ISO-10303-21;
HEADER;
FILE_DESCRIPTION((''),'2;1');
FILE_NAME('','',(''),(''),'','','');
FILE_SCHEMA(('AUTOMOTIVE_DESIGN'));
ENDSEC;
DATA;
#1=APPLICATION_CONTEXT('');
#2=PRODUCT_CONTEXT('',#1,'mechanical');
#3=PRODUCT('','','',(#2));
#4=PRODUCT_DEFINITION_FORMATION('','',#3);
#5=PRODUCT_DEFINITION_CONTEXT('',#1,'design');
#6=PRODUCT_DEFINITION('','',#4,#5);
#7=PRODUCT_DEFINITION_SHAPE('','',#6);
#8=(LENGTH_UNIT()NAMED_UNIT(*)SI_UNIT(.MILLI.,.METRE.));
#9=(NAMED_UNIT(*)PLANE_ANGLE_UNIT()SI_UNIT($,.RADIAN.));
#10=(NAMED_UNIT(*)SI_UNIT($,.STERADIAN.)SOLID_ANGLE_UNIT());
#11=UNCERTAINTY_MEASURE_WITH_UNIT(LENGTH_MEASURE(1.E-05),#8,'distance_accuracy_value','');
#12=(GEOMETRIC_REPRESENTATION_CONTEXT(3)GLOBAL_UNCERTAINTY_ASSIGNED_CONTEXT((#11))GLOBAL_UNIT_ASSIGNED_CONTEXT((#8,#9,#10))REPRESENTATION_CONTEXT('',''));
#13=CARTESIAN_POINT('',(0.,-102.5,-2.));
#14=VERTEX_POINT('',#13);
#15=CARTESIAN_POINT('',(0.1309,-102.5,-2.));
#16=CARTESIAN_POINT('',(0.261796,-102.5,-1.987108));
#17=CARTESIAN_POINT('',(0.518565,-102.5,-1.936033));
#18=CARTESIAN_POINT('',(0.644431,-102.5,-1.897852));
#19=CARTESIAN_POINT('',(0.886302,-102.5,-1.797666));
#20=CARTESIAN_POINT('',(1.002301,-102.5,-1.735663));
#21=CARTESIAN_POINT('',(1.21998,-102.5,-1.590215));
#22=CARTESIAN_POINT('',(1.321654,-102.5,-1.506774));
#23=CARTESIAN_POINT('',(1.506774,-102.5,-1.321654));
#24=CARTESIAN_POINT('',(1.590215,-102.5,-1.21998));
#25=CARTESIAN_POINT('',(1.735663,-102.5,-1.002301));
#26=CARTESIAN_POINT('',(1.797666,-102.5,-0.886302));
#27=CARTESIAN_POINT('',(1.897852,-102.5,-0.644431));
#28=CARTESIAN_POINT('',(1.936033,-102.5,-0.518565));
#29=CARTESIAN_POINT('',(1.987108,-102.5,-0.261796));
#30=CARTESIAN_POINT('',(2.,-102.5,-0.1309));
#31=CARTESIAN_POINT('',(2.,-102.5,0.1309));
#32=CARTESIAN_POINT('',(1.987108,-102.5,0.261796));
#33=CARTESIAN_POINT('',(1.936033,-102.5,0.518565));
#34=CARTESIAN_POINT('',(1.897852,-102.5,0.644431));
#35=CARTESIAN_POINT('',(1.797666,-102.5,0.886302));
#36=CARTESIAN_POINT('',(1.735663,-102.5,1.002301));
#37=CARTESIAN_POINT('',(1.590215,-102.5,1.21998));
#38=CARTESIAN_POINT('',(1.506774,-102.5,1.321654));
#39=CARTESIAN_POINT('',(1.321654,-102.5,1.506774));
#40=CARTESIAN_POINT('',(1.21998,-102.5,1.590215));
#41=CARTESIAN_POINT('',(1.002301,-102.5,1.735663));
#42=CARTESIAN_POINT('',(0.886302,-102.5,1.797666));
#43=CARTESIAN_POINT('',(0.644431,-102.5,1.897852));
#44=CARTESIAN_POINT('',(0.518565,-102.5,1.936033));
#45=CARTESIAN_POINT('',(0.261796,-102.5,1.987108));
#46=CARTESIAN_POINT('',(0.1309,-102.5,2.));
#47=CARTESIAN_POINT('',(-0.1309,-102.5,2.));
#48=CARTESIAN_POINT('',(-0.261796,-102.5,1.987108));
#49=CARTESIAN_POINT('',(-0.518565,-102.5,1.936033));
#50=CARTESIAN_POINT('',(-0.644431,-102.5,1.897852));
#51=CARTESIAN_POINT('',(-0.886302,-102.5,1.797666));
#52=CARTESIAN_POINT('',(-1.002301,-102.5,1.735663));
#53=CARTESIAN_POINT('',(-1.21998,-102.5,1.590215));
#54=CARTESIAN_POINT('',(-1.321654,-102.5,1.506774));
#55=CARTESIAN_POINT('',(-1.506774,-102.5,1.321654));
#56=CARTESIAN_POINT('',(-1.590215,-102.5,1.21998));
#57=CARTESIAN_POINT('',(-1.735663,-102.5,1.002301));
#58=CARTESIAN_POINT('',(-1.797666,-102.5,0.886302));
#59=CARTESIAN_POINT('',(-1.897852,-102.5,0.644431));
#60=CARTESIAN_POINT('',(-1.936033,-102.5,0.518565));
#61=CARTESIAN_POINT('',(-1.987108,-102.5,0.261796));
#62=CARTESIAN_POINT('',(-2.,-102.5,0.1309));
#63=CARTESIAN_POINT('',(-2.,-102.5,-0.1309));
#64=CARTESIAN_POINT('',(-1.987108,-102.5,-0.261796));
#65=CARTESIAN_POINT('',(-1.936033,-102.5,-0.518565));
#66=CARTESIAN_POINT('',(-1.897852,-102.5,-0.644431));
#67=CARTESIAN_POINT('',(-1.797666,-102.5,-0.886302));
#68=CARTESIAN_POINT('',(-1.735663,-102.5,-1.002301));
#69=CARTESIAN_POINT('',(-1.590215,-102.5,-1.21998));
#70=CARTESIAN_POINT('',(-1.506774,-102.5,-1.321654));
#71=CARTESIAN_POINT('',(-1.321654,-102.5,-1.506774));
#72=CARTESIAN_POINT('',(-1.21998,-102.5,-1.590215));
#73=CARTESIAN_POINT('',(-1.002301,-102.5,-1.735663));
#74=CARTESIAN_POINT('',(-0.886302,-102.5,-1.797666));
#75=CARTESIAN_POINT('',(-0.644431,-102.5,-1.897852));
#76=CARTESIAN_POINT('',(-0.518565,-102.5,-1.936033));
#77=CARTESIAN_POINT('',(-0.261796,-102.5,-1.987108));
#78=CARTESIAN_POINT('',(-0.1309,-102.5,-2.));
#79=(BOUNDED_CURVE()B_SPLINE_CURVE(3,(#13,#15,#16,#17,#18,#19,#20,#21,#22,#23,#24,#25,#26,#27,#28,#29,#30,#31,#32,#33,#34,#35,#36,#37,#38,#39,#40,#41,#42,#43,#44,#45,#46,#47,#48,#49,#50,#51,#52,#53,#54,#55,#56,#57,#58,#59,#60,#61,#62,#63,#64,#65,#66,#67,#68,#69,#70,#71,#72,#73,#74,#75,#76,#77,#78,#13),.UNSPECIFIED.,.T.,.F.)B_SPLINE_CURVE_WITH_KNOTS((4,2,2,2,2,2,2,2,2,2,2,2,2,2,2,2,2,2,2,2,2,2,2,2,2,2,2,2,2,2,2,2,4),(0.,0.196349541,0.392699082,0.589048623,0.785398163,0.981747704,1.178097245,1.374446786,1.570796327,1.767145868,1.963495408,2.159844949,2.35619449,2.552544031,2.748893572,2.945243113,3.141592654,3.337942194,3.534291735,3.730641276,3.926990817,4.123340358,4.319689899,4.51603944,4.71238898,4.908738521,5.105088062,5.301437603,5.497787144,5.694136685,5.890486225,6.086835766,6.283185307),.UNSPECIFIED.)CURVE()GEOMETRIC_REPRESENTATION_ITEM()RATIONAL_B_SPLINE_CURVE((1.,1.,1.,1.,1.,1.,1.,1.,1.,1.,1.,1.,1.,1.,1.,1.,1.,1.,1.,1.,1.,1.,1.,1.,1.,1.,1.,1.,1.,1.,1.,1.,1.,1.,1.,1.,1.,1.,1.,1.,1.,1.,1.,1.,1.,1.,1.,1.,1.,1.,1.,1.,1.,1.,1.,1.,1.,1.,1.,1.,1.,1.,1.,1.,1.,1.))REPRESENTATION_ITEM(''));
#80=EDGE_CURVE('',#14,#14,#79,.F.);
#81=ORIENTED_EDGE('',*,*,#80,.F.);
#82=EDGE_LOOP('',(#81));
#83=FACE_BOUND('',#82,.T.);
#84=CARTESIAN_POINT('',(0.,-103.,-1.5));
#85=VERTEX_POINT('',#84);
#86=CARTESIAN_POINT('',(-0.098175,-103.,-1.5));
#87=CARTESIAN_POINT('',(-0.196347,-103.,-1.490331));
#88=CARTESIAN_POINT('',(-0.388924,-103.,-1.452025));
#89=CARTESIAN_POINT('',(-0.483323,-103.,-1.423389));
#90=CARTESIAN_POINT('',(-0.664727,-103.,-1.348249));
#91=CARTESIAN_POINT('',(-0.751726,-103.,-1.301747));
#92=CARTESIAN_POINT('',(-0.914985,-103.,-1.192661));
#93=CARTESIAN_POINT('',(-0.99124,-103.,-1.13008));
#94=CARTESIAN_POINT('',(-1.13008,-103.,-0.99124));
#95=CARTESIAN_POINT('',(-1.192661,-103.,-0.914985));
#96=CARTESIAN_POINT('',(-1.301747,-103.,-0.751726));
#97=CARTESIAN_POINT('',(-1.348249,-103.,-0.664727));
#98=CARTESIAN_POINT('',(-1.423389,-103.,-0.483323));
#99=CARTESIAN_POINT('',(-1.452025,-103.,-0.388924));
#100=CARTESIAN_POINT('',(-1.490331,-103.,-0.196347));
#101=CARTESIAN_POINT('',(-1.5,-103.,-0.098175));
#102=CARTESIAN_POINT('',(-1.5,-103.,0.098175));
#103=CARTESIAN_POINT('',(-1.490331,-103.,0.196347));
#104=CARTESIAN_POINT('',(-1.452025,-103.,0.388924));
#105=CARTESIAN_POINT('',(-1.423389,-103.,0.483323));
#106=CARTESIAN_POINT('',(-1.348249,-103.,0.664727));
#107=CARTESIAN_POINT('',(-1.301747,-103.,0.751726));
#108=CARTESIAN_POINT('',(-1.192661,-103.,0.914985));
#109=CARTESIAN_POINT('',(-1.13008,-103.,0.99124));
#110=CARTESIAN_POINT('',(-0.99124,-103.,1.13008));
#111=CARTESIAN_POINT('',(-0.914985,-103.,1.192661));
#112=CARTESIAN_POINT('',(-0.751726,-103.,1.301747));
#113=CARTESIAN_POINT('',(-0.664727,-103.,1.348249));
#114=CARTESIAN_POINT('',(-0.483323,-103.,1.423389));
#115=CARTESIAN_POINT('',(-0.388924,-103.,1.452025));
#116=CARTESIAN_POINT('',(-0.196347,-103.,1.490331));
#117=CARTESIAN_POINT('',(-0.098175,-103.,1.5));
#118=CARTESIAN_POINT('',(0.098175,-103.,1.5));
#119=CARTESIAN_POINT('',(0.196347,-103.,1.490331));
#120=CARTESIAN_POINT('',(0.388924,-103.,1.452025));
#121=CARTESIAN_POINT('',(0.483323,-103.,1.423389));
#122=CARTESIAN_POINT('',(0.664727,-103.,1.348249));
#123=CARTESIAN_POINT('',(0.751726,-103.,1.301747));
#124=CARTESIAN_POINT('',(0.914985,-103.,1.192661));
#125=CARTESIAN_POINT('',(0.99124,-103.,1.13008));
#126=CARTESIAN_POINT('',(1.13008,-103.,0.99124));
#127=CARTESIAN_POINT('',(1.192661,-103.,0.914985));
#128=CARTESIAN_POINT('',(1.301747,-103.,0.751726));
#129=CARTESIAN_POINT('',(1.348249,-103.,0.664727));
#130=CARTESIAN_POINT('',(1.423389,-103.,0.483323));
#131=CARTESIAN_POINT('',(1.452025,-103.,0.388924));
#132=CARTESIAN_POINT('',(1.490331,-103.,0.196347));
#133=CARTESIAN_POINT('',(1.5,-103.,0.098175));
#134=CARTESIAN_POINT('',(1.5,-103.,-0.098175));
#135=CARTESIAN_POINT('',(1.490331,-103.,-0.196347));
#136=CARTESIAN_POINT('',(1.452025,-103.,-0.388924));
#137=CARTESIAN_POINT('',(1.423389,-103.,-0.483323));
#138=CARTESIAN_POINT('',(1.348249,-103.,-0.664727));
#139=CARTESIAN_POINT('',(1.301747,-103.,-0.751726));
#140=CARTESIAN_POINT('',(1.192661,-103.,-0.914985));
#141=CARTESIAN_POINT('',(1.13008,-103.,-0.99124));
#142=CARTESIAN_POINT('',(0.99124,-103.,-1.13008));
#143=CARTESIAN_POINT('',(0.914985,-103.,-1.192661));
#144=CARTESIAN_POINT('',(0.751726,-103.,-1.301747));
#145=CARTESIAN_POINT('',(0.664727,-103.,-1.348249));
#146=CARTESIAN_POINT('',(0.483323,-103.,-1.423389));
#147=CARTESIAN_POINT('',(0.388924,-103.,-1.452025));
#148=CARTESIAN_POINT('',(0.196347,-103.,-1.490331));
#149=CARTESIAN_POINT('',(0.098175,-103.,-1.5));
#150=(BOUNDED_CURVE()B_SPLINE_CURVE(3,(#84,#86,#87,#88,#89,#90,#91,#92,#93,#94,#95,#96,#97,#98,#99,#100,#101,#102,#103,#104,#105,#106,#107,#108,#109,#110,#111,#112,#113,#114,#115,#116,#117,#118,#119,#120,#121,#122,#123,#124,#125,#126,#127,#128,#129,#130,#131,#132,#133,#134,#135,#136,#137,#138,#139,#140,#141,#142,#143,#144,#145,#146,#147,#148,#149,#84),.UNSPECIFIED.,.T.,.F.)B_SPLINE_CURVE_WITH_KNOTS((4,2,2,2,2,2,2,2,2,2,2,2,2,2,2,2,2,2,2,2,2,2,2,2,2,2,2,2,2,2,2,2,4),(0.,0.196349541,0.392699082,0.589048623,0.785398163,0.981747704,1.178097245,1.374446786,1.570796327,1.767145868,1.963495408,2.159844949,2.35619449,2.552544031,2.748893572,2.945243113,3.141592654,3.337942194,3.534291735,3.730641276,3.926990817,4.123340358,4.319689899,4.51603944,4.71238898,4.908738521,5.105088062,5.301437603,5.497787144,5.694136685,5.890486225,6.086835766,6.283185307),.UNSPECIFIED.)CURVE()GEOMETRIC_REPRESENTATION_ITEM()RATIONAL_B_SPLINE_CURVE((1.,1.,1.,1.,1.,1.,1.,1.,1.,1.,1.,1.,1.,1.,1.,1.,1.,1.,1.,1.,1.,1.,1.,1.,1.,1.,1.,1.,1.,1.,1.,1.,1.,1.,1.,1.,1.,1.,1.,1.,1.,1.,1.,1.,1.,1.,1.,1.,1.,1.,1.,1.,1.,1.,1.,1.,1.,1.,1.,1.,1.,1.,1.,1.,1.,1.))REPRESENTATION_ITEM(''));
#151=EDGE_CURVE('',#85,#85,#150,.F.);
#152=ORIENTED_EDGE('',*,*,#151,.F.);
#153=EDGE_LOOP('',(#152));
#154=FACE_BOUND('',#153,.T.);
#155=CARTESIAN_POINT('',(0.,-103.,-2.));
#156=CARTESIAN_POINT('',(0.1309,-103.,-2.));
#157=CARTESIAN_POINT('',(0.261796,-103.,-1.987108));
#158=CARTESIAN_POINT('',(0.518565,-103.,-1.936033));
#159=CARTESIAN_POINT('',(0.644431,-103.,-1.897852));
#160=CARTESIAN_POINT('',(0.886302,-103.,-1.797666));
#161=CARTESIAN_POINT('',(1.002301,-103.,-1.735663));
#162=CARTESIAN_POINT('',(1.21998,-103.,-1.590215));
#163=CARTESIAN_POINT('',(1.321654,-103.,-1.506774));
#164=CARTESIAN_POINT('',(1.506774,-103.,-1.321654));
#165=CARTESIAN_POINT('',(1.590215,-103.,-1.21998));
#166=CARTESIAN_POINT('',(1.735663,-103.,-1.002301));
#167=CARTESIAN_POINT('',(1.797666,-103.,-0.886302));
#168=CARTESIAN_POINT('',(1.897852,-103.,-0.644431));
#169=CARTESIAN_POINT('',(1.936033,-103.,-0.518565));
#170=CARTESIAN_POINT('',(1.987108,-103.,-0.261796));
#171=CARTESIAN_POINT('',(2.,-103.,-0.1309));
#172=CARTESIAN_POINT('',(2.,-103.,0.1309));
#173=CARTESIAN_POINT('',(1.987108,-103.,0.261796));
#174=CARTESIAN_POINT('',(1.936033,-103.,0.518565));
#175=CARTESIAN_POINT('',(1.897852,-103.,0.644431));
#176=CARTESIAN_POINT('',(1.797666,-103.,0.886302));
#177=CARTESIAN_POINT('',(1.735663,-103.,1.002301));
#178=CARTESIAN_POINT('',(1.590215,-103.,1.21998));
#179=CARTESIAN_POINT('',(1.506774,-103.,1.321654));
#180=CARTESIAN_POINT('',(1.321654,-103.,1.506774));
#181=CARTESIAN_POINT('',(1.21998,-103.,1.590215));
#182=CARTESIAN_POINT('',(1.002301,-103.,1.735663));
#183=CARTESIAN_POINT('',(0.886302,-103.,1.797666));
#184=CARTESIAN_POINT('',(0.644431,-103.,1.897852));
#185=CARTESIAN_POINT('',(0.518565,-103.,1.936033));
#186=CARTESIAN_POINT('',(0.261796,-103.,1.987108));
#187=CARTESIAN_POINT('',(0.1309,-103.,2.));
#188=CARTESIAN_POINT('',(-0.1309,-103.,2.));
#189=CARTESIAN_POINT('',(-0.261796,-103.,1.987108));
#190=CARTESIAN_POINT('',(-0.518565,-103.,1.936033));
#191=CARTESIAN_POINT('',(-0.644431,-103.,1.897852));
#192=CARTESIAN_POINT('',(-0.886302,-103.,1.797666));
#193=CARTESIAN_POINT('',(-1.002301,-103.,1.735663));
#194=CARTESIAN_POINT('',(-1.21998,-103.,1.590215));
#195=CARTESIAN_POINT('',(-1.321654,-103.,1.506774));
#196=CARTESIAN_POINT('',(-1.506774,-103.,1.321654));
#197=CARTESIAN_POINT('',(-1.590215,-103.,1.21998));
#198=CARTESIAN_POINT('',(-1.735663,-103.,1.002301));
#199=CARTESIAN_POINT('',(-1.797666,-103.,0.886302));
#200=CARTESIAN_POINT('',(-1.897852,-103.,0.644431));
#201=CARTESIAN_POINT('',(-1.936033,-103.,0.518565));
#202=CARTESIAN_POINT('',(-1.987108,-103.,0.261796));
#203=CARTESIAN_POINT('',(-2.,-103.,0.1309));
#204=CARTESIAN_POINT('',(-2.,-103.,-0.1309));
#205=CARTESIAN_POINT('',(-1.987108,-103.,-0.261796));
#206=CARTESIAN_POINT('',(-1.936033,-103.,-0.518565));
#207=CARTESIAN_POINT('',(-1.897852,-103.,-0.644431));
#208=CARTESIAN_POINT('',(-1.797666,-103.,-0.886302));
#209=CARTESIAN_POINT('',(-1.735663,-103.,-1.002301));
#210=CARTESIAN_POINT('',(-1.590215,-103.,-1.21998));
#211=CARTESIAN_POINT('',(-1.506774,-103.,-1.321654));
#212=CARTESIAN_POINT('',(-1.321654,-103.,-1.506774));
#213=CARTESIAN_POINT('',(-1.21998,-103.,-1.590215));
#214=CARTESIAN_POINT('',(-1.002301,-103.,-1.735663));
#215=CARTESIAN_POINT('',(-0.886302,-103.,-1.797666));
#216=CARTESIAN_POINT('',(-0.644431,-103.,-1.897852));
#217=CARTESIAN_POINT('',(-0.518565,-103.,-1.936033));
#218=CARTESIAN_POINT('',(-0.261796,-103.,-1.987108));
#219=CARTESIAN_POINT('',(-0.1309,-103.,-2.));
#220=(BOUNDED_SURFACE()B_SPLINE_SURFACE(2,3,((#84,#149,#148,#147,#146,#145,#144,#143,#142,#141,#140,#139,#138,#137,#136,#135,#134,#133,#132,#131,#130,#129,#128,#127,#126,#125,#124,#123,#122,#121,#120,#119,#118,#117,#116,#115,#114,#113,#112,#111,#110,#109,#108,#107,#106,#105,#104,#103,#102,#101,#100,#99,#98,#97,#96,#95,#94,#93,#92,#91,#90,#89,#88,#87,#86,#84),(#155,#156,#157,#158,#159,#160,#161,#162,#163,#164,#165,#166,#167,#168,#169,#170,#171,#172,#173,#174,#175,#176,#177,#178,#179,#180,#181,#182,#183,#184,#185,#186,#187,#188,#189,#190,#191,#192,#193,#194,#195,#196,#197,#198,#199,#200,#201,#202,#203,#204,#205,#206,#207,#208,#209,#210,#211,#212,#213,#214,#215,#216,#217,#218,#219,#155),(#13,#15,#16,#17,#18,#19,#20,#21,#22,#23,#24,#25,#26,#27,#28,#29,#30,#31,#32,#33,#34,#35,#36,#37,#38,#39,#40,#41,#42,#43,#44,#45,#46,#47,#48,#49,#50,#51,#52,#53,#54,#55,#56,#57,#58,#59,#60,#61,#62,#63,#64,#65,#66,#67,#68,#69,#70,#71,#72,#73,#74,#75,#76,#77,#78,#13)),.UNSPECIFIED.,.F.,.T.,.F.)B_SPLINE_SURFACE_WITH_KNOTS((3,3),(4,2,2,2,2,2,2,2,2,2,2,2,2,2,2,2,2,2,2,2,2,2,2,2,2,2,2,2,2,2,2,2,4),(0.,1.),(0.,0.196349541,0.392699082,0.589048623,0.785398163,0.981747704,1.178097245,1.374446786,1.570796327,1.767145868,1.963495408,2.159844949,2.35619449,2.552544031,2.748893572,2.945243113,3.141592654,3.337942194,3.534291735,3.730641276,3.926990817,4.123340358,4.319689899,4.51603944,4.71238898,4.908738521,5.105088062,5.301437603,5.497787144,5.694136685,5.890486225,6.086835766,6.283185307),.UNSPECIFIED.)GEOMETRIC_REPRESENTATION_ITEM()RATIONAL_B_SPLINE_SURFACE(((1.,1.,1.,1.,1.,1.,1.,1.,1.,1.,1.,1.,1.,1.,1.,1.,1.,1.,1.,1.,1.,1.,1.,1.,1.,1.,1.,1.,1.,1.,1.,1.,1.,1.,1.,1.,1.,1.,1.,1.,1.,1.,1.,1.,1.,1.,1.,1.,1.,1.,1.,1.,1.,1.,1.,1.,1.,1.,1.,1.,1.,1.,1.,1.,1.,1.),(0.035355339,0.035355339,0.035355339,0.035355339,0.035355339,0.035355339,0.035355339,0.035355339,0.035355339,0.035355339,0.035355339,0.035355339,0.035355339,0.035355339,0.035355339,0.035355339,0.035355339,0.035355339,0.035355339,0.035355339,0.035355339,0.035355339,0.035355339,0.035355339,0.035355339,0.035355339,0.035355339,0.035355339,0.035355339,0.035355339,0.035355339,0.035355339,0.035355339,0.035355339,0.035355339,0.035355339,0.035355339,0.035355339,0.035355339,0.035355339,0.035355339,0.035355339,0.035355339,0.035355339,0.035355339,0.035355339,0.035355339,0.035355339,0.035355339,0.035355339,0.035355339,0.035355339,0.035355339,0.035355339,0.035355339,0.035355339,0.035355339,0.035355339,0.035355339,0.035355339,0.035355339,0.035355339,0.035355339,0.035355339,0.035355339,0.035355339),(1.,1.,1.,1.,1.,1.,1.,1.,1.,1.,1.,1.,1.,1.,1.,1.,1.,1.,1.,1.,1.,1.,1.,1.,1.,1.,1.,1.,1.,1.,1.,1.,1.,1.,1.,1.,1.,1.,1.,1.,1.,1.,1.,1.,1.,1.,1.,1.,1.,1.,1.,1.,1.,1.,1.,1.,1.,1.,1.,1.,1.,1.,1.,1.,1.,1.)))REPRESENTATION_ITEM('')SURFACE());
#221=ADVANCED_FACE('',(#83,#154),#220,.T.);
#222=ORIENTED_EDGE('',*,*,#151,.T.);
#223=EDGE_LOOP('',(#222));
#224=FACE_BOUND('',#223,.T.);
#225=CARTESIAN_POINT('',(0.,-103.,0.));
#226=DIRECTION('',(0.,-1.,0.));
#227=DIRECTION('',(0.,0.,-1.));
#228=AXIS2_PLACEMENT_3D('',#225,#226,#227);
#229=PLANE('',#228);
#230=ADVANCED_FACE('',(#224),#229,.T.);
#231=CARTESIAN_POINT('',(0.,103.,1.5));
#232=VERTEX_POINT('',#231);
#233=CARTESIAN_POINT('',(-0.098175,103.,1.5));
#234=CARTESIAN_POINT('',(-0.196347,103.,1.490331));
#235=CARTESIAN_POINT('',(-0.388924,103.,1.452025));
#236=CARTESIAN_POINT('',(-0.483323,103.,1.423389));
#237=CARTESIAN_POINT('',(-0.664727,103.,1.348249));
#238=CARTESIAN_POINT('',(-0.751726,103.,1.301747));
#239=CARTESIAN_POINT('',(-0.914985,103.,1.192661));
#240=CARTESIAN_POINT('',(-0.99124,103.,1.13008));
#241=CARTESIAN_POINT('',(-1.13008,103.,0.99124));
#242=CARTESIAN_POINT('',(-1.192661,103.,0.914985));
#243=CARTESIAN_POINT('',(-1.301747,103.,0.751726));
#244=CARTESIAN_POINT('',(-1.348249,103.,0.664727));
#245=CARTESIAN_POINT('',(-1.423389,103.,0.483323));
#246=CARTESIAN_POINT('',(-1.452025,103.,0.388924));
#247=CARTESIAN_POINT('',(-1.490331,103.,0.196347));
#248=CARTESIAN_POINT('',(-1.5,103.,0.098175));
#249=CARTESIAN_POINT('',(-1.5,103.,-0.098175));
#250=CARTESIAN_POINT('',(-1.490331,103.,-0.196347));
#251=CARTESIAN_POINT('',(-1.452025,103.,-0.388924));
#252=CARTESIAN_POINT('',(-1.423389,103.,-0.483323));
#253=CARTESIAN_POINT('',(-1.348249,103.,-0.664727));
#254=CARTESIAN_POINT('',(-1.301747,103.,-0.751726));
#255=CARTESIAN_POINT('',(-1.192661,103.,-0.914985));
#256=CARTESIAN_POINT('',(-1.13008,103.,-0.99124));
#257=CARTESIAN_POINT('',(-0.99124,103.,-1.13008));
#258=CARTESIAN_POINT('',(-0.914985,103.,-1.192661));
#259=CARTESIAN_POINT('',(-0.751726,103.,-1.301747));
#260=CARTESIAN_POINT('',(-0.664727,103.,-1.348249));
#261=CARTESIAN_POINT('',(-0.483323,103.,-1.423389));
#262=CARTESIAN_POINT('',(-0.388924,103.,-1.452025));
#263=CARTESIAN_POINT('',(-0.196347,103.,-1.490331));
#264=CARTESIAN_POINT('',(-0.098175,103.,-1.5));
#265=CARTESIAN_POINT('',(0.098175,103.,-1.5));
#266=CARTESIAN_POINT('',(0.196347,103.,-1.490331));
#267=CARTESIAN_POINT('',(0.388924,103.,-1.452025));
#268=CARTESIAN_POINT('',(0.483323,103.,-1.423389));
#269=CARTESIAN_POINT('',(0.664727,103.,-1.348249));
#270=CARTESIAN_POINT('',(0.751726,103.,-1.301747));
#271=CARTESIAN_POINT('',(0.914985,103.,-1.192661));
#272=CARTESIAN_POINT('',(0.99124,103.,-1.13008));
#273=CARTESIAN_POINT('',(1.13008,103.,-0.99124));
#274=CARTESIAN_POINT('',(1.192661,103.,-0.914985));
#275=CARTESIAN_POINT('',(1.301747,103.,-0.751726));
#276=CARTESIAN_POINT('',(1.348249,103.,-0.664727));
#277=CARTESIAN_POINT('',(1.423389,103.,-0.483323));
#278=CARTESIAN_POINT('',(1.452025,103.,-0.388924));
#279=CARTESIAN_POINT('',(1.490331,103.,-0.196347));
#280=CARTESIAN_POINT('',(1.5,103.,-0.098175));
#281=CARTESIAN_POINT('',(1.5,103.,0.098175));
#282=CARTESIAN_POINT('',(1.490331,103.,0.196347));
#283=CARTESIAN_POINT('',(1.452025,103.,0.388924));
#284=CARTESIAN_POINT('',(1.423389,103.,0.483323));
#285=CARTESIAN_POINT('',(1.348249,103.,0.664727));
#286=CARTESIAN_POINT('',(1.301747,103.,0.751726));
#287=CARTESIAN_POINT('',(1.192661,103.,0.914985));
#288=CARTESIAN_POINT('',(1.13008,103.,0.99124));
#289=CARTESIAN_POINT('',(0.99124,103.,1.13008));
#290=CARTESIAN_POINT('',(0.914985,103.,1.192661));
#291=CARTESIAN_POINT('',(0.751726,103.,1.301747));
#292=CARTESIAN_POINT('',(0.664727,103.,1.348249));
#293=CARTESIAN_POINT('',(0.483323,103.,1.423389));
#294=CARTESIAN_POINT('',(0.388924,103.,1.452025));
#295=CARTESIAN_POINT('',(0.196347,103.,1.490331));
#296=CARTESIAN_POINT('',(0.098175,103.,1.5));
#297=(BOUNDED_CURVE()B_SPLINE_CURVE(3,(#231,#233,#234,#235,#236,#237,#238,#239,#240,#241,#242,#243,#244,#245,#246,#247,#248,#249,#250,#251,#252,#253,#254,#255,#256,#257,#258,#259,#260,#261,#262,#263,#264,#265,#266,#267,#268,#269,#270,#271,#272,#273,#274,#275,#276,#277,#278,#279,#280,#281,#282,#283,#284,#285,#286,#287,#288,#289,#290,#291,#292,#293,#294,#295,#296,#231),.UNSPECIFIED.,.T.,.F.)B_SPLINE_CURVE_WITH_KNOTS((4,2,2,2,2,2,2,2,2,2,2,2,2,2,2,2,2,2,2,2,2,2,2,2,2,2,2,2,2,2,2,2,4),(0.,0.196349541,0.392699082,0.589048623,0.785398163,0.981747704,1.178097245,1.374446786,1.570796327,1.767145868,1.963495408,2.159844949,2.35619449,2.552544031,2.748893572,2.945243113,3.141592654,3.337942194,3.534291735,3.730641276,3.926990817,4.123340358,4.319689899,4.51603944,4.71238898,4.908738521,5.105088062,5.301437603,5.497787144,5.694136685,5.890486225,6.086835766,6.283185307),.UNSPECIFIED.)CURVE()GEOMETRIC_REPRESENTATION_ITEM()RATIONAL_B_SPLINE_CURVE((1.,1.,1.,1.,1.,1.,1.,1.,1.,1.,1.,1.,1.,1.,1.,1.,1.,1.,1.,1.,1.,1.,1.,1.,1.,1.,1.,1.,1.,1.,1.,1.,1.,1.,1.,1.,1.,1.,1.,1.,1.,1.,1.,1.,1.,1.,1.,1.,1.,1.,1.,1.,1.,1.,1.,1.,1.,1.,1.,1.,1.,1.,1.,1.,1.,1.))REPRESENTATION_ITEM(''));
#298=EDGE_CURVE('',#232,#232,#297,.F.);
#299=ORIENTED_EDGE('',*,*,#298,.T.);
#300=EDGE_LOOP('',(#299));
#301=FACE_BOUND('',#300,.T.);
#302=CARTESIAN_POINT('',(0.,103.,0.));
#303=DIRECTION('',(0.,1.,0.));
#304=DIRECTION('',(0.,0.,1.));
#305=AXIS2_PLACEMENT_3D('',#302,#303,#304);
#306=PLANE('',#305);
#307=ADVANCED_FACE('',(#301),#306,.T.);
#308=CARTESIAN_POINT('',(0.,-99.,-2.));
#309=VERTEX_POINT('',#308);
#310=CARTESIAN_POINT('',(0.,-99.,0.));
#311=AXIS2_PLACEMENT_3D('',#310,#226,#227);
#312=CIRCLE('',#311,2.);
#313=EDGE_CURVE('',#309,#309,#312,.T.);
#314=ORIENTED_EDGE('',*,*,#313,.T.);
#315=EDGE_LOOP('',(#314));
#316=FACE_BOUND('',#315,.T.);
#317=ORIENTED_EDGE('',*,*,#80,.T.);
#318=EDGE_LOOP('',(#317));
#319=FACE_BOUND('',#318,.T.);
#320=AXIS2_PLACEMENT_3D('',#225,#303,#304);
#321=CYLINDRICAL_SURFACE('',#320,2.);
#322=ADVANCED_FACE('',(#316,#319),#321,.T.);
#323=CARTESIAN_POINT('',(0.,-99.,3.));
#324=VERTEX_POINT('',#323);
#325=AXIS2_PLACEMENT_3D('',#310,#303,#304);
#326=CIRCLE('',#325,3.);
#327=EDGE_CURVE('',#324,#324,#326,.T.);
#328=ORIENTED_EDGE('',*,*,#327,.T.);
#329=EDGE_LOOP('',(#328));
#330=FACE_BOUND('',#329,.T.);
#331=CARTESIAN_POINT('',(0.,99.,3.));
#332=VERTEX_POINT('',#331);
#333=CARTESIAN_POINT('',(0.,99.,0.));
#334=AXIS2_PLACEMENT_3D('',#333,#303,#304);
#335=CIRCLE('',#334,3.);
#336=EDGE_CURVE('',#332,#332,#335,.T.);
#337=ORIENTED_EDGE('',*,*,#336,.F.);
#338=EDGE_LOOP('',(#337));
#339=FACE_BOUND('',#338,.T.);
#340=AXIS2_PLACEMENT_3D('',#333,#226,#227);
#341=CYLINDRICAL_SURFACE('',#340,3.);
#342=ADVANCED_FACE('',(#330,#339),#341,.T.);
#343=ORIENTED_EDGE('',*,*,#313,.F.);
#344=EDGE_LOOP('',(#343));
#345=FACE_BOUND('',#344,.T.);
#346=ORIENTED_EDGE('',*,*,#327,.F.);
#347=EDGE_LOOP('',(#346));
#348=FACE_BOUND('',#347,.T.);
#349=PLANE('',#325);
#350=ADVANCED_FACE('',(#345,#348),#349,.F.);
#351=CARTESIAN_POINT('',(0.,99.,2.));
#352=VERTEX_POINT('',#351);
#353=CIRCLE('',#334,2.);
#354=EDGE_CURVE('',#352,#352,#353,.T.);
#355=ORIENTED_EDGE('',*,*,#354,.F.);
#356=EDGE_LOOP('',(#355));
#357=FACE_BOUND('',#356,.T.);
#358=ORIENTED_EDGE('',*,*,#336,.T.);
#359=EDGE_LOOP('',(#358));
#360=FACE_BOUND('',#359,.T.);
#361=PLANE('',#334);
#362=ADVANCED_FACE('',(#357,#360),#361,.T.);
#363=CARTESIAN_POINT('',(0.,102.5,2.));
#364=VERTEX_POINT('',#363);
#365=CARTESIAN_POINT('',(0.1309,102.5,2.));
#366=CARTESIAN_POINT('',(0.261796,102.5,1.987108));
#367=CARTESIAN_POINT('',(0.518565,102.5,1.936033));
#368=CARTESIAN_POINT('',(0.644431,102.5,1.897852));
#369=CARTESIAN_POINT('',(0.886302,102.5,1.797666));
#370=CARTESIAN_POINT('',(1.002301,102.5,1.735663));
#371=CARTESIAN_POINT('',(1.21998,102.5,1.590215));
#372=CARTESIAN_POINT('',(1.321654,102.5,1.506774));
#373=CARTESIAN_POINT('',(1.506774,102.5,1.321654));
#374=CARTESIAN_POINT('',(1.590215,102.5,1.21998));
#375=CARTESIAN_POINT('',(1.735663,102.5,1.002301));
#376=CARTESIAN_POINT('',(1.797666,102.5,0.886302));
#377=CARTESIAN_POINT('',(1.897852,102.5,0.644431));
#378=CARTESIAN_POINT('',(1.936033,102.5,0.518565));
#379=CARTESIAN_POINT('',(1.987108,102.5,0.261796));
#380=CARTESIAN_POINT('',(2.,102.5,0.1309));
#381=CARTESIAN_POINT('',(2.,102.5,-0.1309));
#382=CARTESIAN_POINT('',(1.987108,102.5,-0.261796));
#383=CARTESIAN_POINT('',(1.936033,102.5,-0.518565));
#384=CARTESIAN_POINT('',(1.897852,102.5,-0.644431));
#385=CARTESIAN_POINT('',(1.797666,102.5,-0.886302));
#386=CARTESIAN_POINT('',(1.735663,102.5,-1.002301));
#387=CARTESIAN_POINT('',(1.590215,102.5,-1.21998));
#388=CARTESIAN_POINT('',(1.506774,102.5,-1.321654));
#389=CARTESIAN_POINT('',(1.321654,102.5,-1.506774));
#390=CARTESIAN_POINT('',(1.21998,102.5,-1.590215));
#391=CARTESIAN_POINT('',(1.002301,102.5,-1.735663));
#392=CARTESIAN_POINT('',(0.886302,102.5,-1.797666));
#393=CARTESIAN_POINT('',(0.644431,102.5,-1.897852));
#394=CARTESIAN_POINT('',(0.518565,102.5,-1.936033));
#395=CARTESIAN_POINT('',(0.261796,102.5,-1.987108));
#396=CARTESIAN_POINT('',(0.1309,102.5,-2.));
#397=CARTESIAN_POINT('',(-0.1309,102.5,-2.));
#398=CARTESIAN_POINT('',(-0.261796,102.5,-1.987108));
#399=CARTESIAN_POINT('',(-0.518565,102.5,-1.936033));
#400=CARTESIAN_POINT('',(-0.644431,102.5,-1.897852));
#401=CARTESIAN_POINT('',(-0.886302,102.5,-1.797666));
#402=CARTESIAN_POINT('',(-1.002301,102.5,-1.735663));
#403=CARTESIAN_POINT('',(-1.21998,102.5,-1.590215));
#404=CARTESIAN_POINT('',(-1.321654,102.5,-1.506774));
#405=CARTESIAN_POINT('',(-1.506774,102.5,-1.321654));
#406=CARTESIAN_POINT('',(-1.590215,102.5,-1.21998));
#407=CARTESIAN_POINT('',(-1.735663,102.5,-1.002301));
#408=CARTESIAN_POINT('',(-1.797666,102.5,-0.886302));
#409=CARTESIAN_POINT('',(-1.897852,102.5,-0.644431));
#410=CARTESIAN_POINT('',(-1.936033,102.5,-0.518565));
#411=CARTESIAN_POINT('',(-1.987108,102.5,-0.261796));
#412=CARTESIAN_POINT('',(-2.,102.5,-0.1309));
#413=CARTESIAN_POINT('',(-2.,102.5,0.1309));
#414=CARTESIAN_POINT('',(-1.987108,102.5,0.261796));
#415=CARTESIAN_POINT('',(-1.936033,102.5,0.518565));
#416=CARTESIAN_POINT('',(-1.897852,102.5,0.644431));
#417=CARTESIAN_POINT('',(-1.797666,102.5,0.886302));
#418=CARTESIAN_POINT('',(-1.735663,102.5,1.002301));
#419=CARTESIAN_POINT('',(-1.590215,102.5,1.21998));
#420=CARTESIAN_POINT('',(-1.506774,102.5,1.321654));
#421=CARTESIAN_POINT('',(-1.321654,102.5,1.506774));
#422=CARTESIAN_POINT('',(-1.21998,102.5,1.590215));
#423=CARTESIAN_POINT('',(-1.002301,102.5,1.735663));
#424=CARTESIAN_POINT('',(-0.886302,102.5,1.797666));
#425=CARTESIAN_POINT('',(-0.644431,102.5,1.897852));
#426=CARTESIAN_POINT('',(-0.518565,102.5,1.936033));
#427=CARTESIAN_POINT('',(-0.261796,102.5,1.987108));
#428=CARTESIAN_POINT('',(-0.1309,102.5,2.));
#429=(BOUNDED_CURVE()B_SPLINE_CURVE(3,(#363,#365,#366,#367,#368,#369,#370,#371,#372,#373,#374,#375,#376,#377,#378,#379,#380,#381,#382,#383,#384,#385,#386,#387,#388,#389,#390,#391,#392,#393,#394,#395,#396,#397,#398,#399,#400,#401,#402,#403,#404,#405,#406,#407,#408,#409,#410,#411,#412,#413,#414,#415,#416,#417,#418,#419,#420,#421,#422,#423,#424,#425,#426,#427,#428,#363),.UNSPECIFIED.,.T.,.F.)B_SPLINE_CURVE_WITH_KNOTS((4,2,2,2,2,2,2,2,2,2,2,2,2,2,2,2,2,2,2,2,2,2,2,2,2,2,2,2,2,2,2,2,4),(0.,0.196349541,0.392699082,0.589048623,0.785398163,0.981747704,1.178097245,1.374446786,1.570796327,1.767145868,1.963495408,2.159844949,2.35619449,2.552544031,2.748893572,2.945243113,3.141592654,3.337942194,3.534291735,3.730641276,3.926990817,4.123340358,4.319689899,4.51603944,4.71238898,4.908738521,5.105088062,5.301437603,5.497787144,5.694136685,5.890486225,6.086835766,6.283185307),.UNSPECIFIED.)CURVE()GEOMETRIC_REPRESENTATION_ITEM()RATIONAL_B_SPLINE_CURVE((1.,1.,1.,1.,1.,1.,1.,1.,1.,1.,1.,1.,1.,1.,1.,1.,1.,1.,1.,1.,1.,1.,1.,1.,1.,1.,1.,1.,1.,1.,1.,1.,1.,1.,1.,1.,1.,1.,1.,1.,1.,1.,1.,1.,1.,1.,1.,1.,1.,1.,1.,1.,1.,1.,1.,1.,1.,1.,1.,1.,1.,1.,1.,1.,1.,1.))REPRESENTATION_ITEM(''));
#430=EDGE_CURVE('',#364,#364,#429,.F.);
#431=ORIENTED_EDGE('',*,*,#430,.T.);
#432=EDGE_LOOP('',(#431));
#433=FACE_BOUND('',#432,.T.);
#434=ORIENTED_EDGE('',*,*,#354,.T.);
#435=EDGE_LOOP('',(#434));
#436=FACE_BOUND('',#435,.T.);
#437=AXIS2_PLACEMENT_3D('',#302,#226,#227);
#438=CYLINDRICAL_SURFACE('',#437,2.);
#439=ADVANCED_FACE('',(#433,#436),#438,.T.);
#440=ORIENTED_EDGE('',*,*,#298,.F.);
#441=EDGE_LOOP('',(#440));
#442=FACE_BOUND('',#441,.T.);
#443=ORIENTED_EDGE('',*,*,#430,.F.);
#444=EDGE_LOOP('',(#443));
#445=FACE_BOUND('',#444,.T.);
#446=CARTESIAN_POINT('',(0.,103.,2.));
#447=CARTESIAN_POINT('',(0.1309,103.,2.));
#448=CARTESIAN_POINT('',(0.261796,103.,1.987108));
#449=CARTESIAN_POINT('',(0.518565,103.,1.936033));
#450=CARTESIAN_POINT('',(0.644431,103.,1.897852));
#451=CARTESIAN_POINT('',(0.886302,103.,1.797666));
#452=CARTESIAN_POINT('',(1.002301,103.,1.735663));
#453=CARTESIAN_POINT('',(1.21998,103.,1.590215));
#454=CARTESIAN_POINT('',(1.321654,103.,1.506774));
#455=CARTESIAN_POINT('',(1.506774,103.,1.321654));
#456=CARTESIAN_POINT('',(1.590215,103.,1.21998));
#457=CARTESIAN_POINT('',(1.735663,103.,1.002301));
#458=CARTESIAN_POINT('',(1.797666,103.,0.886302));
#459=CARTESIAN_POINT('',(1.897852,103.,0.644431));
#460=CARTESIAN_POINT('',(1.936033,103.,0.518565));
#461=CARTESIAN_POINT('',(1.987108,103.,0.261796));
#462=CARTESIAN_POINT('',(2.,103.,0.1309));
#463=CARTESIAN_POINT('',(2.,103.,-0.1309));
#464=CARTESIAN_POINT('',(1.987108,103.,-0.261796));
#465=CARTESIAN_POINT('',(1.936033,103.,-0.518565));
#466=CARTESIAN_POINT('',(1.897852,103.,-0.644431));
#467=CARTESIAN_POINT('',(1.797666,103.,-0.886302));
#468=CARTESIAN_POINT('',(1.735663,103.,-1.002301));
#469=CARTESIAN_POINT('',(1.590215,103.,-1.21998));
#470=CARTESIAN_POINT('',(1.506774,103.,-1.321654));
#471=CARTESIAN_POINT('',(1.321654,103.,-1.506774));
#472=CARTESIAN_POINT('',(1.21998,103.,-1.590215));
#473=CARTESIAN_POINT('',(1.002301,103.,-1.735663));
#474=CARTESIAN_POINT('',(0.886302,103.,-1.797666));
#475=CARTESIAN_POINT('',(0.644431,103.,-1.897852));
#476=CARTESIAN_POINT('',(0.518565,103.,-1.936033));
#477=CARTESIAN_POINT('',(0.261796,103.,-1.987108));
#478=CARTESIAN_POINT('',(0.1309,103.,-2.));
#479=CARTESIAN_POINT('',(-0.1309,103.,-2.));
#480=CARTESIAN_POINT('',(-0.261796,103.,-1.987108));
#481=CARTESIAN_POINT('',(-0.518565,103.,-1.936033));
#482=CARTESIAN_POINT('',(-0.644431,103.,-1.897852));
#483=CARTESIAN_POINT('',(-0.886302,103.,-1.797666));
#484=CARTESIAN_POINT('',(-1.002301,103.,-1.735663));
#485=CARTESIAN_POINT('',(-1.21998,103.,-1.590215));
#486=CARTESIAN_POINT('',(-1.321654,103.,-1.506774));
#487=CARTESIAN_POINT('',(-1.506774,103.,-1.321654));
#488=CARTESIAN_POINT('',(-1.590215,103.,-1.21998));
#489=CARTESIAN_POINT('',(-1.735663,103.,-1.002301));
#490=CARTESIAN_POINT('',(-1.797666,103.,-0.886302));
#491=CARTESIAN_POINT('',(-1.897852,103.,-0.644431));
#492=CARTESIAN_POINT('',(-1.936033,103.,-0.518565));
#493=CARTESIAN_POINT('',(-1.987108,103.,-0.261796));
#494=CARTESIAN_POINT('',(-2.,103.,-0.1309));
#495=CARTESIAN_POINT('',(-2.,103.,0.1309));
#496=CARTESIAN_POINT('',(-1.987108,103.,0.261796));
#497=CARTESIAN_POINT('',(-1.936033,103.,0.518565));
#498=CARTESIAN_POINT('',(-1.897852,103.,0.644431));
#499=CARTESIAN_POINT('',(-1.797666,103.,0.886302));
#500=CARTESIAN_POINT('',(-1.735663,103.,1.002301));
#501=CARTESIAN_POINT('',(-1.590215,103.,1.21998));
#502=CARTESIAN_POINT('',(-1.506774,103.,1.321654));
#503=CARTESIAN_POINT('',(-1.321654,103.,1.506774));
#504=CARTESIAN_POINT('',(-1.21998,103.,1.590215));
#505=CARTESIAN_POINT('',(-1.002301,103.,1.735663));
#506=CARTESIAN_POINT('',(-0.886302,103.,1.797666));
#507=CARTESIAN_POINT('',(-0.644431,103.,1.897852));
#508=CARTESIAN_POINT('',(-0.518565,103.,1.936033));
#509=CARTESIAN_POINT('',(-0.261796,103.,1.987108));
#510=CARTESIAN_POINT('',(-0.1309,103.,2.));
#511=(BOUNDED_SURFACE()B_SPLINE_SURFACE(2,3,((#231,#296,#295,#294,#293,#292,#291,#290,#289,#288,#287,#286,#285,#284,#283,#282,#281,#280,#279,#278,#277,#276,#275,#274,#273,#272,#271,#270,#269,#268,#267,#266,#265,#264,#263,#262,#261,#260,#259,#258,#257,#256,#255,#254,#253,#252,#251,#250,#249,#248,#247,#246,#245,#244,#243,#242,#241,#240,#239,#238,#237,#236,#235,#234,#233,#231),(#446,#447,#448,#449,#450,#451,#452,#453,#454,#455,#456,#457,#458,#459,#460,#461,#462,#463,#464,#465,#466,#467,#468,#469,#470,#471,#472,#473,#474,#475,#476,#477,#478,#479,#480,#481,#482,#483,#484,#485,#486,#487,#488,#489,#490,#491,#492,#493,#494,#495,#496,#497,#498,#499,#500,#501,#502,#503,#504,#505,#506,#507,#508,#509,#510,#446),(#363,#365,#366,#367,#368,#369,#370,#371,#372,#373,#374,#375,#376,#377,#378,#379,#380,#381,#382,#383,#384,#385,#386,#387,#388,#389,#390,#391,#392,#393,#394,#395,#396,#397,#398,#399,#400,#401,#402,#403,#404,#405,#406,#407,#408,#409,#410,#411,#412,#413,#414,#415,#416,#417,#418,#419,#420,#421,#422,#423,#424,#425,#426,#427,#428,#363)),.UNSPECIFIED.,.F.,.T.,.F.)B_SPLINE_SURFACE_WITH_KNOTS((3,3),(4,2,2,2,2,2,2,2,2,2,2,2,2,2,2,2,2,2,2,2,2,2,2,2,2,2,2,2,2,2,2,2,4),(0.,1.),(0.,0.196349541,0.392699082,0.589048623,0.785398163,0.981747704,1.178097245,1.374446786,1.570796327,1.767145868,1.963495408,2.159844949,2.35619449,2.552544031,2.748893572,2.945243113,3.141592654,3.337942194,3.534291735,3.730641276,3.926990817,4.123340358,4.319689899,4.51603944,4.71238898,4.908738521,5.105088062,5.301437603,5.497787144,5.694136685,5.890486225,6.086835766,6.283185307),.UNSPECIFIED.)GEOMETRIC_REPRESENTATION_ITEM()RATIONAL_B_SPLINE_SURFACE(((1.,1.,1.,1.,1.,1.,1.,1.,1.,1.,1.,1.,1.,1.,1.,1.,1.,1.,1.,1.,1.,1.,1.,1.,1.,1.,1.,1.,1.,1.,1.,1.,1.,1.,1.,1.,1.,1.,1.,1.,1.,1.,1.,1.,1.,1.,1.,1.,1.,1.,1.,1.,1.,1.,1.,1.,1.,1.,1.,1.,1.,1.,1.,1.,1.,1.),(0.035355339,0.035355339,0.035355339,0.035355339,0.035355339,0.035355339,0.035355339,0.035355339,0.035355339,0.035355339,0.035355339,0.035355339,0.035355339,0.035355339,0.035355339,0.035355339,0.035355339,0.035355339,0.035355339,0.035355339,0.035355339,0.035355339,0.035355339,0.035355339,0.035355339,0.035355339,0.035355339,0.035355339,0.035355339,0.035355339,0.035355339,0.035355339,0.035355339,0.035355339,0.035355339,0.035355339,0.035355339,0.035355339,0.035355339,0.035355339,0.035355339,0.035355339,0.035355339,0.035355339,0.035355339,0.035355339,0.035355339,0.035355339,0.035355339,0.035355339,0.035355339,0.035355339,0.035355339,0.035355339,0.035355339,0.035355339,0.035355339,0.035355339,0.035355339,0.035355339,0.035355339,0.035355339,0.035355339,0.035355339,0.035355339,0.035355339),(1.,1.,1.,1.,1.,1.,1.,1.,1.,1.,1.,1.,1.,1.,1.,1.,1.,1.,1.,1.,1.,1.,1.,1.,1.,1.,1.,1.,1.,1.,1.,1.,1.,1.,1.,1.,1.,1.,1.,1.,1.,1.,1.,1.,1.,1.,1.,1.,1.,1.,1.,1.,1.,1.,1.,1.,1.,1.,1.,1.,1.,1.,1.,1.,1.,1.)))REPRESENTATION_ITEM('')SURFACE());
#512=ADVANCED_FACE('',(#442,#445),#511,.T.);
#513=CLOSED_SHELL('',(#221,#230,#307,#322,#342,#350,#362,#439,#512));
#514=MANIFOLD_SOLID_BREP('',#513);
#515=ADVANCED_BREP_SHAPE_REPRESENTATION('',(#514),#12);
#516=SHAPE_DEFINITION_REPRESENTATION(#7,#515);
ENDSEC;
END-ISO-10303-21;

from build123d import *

# Parameters (mm, degrees)
IZIM1_R                     = 3
Y_KSEKLIK_EKSTR_ZYON6_DEPTH = 99
IZIM2_R                     = 2
Y_KSEKLIK_EKSTR_ZYON7_DEPTH = 4
RADYUS1_SIZE                = 0.5
Y_KSEKLIK_EKSTR_ZYON8_START = 4
IZIM5_R                     = 2
Y_KSEKLIK_EKSTR_ZYON8_DEPTH = 4
RADYUS2_SIZE                = 0.5


with BuildPart() as part:
    # Çizim1 → Yükseklik-Ekstrüzyon6 (new, symmetric)
    with BuildSketch(Plane(origin=(0, 0, 0), x_dir=(1, 0, 0), z_dir=(0, 1, 0))):
        with Locations(Location((0, 0, 0), (0, 0, 270))):
            Circle(IZIM1_R)
    extrude(amount=Y_KSEKLIK_EKSTR_ZYON6_DEPTH, both=True)

    # Çizim2 → Yükseklik-Ekstrüzyon7 (add)
    with BuildSketch(Plane(origin=(0, 99, 0), x_dir=(1, 0, 0), z_dir=(0, 1, 0))):
        with Locations(Location((0, 0, 0), (0, 0, 270))):
            Circle(IZIM2_R)
    extrude(amount=Y_KSEKLIK_EKSTR_ZYON7_DEPTH)

    # Radyus1
    # a fillet whose section is not a circle: 0.5 mm, written as the material it takes off along each edge
    with BuildSketch(Plane(origin=(0, 103, 0), x_dir=(0, 0, 1), z_dir=(-1, 0, 0))) as radyus1_piece_1:
        with BuildLine():
            Bezier((2, -RADYUS1_SIZE), (2, 0), (2 - RADYUS1_SIZE, 0), weights=[1, 0.035355339, 1])
            Line((2 - RADYUS1_SIZE, 0), (2, 0))
            Line((2, 0), (2, -RADYUS1_SIZE))
        make_face()
    revolve(axis=Axis((0, 103, 0), (0, 1, 0)), mode=Mode.SUBTRACT)

    # Çizim5 → Yükseklik-Ekstrüzyon8 (add)
    with BuildSketch(Plane.XZ.offset(99).offset(Y_KSEKLIK_EKSTR_ZYON8_START)):
        with Locations(Location((0, 0, 0), (0, 0, 90))):
            Circle(IZIM5_R)
    extrude(amount=-Y_KSEKLIK_EKSTR_ZYON8_DEPTH)

    # Radyus2
    # a fillet whose section is not a circle: 0.5 mm, written as the material it takes off along each edge
    with BuildSketch(Plane(origin=(0, -103, 0), x_dir=(0, 0, 1), z_dir=(1, 0, 0))) as radyus2_piece_1:
        with BuildLine():
            Bezier((2, -RADYUS2_SIZE), (2, 0), (2 - RADYUS2_SIZE, 0), weights=[1, 0.035355339, 1])
            Line((2 - RADYUS2_SIZE, 0), (2, 0))
            Line((2, 0), (2, -RADYUS2_SIZE))
        make_face()
    revolve(axis=Axis((0, -103, 0), (0, -1, 0)), mode=Mode.SUBTRACT)


solid = part.part
